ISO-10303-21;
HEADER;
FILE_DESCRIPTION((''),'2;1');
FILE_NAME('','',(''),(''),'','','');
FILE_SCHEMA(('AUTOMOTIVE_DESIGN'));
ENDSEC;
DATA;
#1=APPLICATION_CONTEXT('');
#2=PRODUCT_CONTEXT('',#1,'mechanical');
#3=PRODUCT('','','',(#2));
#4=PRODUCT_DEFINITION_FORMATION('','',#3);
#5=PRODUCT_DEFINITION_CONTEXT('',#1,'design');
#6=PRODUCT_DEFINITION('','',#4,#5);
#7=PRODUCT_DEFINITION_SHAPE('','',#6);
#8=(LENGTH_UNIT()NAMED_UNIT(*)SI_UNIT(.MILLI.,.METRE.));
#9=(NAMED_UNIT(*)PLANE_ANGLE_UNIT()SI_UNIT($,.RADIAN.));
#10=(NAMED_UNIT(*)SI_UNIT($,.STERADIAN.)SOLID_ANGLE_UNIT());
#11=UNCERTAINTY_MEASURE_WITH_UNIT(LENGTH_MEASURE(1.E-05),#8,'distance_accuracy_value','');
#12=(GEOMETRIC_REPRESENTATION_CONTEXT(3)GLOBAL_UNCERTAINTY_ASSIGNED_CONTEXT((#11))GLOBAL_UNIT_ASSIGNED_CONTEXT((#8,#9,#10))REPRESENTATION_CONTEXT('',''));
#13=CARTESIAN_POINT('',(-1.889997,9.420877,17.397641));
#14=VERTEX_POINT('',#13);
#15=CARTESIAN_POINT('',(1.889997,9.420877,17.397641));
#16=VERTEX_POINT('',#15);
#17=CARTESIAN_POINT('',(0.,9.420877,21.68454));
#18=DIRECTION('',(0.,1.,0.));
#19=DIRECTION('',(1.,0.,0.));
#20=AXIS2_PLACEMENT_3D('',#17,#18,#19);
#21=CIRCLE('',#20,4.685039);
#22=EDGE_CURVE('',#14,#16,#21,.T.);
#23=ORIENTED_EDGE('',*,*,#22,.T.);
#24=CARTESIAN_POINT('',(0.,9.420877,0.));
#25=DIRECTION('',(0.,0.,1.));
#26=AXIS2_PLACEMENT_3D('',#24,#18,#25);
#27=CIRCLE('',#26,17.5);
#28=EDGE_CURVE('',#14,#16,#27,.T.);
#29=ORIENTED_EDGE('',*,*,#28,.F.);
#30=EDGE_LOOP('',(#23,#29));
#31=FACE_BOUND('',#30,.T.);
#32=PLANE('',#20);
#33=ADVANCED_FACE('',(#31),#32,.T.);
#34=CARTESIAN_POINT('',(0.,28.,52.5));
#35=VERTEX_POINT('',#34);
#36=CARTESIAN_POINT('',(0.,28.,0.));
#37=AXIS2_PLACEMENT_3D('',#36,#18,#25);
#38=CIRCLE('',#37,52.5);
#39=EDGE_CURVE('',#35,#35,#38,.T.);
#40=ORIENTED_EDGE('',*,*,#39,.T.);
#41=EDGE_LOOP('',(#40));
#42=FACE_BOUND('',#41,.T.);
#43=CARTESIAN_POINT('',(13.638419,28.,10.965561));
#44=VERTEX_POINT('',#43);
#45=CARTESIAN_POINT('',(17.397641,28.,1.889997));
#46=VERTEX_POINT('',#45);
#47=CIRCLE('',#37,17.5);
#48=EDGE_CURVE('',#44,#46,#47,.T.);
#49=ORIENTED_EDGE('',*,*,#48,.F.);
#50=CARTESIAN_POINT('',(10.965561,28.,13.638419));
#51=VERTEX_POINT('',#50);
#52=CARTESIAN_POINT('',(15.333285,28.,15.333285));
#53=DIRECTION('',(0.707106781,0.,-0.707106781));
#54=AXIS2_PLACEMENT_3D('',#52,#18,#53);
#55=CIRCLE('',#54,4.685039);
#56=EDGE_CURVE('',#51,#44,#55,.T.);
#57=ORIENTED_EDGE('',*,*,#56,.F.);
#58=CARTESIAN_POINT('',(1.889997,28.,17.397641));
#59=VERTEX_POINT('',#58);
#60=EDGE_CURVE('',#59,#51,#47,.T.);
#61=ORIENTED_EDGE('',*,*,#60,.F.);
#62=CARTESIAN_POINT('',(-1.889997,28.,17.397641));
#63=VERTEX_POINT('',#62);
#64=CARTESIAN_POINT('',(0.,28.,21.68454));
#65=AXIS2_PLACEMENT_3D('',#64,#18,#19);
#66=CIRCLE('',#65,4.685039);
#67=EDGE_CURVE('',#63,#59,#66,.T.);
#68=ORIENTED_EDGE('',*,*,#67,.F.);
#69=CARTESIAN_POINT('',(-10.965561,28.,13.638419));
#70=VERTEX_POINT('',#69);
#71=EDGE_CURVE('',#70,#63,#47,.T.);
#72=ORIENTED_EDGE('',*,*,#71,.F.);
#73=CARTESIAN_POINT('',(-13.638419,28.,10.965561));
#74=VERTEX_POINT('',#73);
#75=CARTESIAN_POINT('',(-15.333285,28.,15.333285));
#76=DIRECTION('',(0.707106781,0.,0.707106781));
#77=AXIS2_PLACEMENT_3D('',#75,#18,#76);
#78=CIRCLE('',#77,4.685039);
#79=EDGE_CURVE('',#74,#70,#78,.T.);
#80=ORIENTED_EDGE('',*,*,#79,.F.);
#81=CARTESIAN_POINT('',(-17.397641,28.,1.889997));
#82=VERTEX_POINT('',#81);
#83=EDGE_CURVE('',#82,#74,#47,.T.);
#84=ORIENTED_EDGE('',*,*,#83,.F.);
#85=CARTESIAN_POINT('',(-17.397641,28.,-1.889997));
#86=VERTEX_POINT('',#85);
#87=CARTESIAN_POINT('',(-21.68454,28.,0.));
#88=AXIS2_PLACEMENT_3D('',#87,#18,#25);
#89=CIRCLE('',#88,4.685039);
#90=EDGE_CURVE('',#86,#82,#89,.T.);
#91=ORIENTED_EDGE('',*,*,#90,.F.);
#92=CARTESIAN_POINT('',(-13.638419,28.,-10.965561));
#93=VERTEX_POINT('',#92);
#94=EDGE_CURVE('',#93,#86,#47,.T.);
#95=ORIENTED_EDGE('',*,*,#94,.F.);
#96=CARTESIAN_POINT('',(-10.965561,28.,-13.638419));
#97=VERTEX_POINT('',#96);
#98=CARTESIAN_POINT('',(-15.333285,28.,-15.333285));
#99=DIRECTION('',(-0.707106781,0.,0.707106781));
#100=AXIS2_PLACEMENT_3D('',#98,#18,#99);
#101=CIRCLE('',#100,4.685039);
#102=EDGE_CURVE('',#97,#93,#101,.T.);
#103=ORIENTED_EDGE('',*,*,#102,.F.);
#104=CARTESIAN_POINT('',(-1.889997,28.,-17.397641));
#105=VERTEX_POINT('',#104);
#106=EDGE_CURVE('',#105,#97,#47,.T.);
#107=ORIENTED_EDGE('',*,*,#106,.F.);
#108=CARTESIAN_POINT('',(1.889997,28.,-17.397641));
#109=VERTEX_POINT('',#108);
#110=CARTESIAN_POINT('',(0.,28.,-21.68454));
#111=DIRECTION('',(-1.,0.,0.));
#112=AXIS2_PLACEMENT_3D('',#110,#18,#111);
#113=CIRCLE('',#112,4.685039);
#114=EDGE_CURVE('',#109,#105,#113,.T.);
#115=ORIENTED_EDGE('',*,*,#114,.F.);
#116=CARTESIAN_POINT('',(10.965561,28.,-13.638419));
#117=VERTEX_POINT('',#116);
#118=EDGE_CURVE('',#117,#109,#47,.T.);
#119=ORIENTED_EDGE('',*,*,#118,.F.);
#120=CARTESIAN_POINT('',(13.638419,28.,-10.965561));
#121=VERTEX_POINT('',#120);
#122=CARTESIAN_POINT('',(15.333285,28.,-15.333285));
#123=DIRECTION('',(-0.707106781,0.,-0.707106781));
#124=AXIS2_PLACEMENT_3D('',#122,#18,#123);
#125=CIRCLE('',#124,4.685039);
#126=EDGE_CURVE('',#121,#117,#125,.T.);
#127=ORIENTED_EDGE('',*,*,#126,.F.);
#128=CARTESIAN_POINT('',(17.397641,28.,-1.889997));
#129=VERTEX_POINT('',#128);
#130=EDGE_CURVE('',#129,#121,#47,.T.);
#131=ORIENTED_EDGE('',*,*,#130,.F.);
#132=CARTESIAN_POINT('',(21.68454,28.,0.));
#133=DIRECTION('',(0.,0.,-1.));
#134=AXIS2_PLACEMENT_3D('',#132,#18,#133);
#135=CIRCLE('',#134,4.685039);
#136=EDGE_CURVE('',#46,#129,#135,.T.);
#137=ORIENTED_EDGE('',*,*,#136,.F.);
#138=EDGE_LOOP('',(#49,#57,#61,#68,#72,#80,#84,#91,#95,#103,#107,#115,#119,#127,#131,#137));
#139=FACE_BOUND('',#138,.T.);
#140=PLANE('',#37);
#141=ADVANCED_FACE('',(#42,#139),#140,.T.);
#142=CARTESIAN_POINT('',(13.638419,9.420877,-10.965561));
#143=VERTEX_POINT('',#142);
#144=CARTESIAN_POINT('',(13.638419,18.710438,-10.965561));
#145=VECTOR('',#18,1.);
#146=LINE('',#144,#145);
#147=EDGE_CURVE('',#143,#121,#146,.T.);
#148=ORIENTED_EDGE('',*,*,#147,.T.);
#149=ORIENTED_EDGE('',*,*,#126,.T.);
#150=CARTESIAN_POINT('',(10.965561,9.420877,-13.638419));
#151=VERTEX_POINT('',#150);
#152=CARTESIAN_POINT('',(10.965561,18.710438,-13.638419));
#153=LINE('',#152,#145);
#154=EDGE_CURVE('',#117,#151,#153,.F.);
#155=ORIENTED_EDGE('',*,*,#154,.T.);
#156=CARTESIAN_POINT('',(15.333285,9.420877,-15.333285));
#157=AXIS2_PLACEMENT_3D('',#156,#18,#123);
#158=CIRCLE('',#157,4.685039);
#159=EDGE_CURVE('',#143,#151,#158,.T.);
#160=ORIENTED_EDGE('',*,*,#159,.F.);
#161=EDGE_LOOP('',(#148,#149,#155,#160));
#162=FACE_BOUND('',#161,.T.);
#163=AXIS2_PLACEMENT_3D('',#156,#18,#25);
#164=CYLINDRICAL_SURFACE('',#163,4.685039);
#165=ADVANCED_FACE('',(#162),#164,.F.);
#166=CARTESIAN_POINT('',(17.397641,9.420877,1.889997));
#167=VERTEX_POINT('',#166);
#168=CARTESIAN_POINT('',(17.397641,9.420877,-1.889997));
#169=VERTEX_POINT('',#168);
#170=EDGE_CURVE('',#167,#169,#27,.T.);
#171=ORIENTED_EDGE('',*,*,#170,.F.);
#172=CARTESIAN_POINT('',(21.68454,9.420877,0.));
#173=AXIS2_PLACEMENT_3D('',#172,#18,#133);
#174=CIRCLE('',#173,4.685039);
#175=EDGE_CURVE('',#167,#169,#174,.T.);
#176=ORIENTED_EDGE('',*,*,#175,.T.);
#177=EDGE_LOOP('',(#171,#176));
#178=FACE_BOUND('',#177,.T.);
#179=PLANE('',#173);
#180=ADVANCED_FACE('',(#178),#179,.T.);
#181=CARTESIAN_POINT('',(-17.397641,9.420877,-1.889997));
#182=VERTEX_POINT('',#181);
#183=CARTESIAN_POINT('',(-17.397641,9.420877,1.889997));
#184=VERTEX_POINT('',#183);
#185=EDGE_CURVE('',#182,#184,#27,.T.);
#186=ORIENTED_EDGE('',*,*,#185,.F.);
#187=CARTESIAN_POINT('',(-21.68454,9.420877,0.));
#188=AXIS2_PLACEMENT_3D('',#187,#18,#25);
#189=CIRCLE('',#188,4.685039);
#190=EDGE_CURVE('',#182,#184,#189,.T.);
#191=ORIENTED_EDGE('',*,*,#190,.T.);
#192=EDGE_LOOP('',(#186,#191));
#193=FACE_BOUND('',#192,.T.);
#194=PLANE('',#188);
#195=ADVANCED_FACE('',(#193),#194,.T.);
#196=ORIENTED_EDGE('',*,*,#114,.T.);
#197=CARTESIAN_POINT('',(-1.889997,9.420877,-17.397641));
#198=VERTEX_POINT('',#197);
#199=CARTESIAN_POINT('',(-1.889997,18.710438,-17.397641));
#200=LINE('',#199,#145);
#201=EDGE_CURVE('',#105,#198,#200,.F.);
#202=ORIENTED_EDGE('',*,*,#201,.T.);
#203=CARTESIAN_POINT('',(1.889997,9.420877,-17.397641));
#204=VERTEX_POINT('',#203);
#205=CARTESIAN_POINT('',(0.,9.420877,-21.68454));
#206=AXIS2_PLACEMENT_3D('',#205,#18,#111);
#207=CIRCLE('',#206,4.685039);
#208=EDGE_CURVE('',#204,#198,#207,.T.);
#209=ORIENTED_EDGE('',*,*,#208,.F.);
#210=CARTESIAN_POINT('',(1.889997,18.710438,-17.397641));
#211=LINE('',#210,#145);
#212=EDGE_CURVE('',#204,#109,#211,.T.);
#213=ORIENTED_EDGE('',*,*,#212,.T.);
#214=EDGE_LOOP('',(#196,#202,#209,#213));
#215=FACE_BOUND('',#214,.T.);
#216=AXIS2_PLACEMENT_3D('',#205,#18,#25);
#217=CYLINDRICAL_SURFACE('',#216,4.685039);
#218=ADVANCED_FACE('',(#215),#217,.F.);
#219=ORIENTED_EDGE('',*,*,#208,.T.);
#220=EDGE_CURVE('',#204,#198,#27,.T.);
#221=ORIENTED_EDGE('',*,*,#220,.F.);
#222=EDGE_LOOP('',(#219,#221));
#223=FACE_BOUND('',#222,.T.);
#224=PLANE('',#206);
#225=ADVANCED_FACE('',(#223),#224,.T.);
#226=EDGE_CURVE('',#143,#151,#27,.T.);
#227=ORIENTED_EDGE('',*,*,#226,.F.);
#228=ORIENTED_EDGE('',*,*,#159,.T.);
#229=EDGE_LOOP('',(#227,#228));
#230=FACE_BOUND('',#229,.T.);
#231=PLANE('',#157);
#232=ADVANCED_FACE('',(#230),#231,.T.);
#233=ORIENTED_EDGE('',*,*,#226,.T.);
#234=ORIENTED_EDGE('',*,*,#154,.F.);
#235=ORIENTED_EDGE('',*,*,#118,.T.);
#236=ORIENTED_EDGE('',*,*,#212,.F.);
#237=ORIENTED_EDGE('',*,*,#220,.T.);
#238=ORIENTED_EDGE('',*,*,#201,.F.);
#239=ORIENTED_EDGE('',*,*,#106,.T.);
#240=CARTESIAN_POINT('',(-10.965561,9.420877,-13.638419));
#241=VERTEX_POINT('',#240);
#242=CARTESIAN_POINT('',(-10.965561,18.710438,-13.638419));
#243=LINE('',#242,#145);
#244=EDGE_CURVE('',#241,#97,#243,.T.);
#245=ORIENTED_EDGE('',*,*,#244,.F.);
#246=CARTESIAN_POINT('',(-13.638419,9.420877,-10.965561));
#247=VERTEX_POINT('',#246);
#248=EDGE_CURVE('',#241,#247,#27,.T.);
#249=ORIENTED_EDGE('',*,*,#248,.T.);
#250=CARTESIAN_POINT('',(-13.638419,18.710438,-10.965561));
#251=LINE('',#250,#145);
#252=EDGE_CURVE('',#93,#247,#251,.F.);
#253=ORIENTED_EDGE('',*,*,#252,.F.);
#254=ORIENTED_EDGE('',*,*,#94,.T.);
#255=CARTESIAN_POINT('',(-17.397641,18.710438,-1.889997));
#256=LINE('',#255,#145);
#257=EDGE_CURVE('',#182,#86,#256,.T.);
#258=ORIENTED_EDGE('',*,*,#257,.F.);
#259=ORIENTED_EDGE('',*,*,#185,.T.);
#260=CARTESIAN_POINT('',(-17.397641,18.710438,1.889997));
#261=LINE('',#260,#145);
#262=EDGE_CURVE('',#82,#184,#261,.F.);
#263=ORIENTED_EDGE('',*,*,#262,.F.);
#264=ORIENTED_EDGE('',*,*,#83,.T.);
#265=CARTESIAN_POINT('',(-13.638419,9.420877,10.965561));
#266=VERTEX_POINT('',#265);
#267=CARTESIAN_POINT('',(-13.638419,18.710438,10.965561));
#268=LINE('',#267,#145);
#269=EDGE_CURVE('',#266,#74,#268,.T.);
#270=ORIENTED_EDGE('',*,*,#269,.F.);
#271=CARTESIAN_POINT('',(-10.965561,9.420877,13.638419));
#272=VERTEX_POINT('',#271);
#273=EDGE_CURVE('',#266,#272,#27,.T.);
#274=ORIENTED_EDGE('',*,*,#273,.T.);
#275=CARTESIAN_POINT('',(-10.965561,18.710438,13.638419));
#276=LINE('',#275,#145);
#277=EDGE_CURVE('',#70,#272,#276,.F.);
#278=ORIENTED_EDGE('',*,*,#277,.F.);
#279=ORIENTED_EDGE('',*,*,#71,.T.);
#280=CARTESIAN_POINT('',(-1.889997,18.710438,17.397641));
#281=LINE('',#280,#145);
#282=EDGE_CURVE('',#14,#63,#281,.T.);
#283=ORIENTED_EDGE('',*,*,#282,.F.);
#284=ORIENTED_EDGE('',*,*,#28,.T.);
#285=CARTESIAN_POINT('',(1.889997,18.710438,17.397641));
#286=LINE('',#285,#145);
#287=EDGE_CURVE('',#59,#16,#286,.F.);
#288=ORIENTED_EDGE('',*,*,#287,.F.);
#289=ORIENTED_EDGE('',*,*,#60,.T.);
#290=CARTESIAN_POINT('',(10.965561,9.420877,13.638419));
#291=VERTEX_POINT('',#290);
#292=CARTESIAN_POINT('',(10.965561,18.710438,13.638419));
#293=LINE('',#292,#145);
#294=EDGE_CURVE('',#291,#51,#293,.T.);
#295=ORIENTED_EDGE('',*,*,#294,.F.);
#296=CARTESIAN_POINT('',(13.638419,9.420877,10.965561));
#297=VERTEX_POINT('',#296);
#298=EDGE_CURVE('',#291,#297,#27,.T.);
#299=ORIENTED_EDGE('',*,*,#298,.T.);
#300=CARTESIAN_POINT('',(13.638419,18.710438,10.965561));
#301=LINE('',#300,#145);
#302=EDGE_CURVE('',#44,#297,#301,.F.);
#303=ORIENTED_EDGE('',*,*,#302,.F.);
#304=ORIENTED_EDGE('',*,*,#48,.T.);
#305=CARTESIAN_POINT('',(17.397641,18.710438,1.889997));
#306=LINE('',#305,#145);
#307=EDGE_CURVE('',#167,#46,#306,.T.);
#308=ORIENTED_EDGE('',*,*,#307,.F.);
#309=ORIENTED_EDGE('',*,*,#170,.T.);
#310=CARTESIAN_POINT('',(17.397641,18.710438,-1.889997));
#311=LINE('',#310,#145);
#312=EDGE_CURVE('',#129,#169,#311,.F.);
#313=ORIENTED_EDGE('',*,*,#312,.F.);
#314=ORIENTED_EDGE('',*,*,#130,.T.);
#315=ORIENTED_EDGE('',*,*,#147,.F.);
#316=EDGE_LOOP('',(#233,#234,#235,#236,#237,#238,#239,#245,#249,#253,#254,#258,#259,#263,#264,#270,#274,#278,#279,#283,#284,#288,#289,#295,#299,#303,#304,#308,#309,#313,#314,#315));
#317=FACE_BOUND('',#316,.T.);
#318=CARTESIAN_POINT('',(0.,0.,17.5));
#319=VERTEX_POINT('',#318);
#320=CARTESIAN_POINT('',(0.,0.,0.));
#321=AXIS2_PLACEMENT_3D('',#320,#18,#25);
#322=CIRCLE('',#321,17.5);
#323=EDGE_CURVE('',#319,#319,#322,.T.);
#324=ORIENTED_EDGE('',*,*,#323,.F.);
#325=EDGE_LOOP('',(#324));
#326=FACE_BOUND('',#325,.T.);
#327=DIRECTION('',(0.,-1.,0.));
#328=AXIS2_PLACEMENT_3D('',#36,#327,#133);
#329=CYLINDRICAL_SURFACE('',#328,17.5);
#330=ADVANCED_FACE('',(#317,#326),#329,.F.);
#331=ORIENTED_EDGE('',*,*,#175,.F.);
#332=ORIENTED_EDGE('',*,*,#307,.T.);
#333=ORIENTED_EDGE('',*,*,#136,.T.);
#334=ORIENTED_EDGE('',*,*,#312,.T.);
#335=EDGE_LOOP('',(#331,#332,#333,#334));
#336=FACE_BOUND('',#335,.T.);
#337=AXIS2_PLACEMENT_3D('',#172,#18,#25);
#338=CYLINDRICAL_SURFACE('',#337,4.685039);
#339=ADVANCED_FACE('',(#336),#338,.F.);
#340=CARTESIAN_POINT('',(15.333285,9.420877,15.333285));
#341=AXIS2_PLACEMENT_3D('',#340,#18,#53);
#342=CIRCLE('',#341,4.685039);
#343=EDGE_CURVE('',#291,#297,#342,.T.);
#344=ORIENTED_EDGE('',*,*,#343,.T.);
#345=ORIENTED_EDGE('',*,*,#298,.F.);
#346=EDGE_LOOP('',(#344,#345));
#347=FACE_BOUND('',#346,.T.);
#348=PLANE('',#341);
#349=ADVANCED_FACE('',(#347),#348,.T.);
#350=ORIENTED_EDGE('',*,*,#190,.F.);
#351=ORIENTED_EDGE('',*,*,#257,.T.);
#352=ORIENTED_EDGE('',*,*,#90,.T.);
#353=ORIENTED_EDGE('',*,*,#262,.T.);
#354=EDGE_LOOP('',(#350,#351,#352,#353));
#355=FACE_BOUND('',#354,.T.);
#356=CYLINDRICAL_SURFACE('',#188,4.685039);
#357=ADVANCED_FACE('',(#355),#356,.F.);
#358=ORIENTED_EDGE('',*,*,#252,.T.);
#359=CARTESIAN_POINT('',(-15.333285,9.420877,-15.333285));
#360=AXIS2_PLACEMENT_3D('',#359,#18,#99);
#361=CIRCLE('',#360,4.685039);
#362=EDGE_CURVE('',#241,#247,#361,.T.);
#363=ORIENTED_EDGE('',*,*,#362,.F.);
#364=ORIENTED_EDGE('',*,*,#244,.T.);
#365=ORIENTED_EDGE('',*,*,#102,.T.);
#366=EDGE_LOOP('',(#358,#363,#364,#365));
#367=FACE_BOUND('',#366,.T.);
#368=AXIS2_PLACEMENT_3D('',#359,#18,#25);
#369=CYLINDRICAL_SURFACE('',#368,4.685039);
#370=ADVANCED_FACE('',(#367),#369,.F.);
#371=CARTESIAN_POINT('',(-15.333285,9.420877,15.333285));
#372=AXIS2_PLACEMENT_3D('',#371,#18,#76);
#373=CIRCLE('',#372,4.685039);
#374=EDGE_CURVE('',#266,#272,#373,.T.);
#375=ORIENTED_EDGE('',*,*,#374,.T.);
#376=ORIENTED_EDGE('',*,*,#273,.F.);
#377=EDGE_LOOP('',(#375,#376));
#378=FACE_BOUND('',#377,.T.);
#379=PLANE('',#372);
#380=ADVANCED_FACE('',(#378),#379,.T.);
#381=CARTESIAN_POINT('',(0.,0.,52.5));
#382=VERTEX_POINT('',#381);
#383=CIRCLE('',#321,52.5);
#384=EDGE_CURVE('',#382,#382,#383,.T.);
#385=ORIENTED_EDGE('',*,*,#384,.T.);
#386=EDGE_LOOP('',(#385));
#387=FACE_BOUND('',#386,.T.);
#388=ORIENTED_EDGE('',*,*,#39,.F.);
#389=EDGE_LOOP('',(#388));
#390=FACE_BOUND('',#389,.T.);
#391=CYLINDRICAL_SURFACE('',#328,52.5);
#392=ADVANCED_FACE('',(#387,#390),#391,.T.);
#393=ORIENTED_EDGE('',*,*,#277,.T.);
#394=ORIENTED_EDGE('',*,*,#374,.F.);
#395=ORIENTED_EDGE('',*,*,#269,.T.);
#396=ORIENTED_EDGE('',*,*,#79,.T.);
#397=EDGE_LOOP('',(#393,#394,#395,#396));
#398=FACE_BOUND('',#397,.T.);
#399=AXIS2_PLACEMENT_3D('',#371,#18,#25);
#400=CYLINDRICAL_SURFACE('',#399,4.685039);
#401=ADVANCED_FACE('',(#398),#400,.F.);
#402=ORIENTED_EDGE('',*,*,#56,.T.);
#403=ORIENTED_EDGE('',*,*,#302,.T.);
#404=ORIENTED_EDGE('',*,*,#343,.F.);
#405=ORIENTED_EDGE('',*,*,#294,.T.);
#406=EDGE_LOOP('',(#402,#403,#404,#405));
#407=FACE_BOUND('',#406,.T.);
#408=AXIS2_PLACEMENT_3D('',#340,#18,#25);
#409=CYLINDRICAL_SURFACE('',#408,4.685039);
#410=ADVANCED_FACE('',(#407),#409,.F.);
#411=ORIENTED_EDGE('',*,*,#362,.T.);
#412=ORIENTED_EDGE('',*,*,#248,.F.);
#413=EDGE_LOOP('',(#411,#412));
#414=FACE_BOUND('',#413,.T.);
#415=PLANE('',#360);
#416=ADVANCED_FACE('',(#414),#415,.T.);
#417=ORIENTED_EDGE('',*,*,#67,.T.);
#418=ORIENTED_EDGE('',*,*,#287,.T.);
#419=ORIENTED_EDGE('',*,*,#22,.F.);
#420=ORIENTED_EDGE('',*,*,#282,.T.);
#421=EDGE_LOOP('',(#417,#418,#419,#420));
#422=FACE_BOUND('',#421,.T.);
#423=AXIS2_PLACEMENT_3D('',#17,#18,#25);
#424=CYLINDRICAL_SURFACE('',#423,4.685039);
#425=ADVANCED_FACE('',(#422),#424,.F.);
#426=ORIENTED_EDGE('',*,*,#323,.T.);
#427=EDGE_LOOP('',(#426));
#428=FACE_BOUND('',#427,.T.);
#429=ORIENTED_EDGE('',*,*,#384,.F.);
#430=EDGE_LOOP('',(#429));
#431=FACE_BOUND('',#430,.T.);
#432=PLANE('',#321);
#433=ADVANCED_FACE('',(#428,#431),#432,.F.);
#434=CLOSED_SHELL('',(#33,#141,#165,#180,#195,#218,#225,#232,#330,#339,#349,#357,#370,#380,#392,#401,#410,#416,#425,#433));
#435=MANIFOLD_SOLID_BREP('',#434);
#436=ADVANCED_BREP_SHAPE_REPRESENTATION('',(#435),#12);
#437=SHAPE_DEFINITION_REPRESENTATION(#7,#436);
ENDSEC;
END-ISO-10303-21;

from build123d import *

# Parameters (mm, degrees)
SKETCH1_R           = 52.5
BOSS_EXTRUDE1_DEPTH = 28
SKETCH2_R           = 17.5
CUT_EXTRUDE1_DEPTH  = 80.350488341
SKETCH3_R           = 4.685038561
CUT_EXTRUDE2_DEPTH  = 18.579123124
CIRPATTERN1_COUNT   = 8


with BuildPart() as part:
    # Sketch1 → Boss-Extrude1 (new body)
    with BuildSketch(Plane(origin=(0, 0, 0), x_dir=(1, 0, 0), z_dir=(0, 1, 0))):
        Circle(SKETCH1_R)
    extrude(amount=BOSS_EXTRUDE1_DEPTH)

    # Sketch2 → Cut-Extrude1 (cut, through all)
    with BuildSketch(Plane(origin=(0, 0, 0), x_dir=(1, 0, 0), z_dir=(0, 1, 0))):
        Circle(SKETCH2_R)
    extrude(amount=CUT_EXTRUDE1_DEPTH, mode=Mode.SUBTRACT)

    # Sketch3 → Cut-Extrude2 (cut)
    with BuildSketch(Plane(origin=(0, 28, 0), x_dir=(1, 0, 0), z_dir=(0, 1, 0))):
        with Locations((-21.684539548, 0)):
            Circle(SKETCH3_R)
    cut_extrude2 = extrude(amount=-CUT_EXTRUDE2_DEPTH, mode=Mode.SUBTRACT)

    # CirPattern1: Cut-Extrude2 ×8 about axis
    cirpattern1_axis = Axis((0, 0, 0), (0, 1, 0))
    for i in range(1, CIRPATTERN1_COUNT):
        add(cut_extrude2.rotate(cirpattern1_axis, i * 360 / CIRPATTERN1_COUNT), mode=Mode.SUBTRACT)


solid = part.part
